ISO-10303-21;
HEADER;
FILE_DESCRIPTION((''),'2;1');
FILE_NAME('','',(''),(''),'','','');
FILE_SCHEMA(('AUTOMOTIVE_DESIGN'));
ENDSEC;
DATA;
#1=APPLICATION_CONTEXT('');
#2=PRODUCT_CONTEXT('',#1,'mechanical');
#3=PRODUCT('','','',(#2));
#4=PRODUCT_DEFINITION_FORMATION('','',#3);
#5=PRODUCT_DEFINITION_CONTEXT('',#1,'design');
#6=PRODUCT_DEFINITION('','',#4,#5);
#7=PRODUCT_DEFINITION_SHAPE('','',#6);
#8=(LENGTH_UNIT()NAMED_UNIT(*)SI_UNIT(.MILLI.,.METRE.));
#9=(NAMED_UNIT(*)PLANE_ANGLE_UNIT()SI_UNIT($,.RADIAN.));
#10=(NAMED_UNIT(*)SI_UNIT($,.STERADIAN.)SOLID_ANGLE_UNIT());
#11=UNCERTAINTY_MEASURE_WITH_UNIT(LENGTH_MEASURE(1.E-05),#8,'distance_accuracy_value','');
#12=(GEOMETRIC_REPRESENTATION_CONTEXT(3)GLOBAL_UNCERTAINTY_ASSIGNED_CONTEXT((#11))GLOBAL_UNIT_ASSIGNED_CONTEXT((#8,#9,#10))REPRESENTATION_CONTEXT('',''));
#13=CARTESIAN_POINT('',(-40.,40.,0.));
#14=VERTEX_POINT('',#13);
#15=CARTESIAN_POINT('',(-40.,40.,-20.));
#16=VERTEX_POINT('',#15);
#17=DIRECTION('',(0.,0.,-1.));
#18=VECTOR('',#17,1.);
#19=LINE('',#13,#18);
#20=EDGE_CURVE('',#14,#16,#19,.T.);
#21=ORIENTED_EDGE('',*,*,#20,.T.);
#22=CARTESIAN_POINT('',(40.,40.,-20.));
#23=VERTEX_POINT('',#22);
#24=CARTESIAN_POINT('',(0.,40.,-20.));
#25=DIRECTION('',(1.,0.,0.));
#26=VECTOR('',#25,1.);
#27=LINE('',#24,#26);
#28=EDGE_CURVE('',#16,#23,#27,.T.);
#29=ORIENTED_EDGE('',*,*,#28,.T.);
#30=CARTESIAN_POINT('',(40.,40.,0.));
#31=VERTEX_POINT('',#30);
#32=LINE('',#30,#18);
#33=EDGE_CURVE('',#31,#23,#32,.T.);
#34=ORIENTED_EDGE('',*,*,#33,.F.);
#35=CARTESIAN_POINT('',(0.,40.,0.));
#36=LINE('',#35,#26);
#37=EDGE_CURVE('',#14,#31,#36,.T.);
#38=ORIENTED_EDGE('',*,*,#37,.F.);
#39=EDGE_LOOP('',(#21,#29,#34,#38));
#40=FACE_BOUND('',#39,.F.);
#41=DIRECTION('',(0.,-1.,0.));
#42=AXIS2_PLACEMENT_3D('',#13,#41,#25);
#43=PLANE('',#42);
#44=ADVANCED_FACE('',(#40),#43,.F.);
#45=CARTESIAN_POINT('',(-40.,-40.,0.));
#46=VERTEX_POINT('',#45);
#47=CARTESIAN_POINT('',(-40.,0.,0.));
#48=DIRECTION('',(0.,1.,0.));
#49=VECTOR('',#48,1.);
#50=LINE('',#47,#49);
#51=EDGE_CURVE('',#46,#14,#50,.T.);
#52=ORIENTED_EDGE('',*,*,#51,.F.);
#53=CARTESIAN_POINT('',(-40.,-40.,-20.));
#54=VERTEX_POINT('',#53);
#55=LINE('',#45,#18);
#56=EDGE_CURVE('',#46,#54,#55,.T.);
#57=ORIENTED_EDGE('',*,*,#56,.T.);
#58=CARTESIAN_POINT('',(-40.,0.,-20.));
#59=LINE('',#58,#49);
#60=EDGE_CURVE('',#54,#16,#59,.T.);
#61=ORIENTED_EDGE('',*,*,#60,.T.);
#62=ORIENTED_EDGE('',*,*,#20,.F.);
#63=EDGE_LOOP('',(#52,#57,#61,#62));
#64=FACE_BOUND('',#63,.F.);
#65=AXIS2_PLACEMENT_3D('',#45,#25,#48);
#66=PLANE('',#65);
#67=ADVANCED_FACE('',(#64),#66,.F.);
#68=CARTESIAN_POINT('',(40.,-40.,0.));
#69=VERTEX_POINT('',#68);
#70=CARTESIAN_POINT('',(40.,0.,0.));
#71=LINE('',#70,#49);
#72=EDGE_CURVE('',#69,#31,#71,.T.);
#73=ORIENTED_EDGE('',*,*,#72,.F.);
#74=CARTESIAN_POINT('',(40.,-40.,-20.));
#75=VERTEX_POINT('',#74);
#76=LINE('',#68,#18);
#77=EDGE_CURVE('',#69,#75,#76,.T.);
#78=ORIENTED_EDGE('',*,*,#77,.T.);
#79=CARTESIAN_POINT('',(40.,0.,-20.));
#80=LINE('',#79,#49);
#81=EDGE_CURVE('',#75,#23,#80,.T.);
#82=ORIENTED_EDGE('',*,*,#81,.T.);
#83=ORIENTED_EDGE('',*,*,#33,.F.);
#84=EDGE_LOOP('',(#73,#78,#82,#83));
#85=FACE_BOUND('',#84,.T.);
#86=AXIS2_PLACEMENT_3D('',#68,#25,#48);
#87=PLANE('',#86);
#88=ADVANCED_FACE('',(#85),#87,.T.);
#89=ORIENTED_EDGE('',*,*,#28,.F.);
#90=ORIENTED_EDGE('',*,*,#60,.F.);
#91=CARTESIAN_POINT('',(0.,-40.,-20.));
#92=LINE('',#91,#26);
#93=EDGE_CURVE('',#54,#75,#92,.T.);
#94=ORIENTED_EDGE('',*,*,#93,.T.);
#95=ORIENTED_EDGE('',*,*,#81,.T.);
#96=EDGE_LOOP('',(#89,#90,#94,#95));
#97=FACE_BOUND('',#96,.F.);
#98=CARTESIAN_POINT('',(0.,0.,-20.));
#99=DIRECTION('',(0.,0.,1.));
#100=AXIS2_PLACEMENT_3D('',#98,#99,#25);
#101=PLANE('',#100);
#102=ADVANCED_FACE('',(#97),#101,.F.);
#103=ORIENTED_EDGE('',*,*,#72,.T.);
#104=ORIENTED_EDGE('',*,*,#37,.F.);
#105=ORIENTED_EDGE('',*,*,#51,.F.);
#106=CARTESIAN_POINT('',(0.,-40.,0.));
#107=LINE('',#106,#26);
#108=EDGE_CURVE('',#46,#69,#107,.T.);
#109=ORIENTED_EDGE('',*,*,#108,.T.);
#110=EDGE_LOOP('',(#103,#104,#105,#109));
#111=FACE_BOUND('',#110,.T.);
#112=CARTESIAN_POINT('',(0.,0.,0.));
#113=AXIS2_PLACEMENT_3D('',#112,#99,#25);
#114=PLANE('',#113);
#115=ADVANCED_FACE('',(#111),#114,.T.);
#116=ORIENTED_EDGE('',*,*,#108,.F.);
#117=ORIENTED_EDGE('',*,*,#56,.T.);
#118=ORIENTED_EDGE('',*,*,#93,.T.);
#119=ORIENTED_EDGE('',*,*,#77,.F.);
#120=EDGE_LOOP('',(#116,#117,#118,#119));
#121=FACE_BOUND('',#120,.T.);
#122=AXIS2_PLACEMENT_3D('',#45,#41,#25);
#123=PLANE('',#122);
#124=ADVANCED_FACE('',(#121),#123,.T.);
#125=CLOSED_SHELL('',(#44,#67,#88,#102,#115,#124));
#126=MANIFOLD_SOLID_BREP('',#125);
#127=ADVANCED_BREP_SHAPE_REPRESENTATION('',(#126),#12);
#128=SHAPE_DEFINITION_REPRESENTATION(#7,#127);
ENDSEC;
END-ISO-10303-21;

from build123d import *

# Parameters (mm, degrees)
F0_W     = 80
F0_H     = 80
F1_DEPTH = 20


# Not quite as in the source:
# - a feature names something its author has since deleted; it is built from what else it names


with BuildPart() as f1:
    # F0 (on Top) → F1 (new body)
    with BuildSketch(Plane.XY):
        Rectangle(F0_W, F0_H)
    extrude(amount=-F1_DEPTH)


solid = f1.part
